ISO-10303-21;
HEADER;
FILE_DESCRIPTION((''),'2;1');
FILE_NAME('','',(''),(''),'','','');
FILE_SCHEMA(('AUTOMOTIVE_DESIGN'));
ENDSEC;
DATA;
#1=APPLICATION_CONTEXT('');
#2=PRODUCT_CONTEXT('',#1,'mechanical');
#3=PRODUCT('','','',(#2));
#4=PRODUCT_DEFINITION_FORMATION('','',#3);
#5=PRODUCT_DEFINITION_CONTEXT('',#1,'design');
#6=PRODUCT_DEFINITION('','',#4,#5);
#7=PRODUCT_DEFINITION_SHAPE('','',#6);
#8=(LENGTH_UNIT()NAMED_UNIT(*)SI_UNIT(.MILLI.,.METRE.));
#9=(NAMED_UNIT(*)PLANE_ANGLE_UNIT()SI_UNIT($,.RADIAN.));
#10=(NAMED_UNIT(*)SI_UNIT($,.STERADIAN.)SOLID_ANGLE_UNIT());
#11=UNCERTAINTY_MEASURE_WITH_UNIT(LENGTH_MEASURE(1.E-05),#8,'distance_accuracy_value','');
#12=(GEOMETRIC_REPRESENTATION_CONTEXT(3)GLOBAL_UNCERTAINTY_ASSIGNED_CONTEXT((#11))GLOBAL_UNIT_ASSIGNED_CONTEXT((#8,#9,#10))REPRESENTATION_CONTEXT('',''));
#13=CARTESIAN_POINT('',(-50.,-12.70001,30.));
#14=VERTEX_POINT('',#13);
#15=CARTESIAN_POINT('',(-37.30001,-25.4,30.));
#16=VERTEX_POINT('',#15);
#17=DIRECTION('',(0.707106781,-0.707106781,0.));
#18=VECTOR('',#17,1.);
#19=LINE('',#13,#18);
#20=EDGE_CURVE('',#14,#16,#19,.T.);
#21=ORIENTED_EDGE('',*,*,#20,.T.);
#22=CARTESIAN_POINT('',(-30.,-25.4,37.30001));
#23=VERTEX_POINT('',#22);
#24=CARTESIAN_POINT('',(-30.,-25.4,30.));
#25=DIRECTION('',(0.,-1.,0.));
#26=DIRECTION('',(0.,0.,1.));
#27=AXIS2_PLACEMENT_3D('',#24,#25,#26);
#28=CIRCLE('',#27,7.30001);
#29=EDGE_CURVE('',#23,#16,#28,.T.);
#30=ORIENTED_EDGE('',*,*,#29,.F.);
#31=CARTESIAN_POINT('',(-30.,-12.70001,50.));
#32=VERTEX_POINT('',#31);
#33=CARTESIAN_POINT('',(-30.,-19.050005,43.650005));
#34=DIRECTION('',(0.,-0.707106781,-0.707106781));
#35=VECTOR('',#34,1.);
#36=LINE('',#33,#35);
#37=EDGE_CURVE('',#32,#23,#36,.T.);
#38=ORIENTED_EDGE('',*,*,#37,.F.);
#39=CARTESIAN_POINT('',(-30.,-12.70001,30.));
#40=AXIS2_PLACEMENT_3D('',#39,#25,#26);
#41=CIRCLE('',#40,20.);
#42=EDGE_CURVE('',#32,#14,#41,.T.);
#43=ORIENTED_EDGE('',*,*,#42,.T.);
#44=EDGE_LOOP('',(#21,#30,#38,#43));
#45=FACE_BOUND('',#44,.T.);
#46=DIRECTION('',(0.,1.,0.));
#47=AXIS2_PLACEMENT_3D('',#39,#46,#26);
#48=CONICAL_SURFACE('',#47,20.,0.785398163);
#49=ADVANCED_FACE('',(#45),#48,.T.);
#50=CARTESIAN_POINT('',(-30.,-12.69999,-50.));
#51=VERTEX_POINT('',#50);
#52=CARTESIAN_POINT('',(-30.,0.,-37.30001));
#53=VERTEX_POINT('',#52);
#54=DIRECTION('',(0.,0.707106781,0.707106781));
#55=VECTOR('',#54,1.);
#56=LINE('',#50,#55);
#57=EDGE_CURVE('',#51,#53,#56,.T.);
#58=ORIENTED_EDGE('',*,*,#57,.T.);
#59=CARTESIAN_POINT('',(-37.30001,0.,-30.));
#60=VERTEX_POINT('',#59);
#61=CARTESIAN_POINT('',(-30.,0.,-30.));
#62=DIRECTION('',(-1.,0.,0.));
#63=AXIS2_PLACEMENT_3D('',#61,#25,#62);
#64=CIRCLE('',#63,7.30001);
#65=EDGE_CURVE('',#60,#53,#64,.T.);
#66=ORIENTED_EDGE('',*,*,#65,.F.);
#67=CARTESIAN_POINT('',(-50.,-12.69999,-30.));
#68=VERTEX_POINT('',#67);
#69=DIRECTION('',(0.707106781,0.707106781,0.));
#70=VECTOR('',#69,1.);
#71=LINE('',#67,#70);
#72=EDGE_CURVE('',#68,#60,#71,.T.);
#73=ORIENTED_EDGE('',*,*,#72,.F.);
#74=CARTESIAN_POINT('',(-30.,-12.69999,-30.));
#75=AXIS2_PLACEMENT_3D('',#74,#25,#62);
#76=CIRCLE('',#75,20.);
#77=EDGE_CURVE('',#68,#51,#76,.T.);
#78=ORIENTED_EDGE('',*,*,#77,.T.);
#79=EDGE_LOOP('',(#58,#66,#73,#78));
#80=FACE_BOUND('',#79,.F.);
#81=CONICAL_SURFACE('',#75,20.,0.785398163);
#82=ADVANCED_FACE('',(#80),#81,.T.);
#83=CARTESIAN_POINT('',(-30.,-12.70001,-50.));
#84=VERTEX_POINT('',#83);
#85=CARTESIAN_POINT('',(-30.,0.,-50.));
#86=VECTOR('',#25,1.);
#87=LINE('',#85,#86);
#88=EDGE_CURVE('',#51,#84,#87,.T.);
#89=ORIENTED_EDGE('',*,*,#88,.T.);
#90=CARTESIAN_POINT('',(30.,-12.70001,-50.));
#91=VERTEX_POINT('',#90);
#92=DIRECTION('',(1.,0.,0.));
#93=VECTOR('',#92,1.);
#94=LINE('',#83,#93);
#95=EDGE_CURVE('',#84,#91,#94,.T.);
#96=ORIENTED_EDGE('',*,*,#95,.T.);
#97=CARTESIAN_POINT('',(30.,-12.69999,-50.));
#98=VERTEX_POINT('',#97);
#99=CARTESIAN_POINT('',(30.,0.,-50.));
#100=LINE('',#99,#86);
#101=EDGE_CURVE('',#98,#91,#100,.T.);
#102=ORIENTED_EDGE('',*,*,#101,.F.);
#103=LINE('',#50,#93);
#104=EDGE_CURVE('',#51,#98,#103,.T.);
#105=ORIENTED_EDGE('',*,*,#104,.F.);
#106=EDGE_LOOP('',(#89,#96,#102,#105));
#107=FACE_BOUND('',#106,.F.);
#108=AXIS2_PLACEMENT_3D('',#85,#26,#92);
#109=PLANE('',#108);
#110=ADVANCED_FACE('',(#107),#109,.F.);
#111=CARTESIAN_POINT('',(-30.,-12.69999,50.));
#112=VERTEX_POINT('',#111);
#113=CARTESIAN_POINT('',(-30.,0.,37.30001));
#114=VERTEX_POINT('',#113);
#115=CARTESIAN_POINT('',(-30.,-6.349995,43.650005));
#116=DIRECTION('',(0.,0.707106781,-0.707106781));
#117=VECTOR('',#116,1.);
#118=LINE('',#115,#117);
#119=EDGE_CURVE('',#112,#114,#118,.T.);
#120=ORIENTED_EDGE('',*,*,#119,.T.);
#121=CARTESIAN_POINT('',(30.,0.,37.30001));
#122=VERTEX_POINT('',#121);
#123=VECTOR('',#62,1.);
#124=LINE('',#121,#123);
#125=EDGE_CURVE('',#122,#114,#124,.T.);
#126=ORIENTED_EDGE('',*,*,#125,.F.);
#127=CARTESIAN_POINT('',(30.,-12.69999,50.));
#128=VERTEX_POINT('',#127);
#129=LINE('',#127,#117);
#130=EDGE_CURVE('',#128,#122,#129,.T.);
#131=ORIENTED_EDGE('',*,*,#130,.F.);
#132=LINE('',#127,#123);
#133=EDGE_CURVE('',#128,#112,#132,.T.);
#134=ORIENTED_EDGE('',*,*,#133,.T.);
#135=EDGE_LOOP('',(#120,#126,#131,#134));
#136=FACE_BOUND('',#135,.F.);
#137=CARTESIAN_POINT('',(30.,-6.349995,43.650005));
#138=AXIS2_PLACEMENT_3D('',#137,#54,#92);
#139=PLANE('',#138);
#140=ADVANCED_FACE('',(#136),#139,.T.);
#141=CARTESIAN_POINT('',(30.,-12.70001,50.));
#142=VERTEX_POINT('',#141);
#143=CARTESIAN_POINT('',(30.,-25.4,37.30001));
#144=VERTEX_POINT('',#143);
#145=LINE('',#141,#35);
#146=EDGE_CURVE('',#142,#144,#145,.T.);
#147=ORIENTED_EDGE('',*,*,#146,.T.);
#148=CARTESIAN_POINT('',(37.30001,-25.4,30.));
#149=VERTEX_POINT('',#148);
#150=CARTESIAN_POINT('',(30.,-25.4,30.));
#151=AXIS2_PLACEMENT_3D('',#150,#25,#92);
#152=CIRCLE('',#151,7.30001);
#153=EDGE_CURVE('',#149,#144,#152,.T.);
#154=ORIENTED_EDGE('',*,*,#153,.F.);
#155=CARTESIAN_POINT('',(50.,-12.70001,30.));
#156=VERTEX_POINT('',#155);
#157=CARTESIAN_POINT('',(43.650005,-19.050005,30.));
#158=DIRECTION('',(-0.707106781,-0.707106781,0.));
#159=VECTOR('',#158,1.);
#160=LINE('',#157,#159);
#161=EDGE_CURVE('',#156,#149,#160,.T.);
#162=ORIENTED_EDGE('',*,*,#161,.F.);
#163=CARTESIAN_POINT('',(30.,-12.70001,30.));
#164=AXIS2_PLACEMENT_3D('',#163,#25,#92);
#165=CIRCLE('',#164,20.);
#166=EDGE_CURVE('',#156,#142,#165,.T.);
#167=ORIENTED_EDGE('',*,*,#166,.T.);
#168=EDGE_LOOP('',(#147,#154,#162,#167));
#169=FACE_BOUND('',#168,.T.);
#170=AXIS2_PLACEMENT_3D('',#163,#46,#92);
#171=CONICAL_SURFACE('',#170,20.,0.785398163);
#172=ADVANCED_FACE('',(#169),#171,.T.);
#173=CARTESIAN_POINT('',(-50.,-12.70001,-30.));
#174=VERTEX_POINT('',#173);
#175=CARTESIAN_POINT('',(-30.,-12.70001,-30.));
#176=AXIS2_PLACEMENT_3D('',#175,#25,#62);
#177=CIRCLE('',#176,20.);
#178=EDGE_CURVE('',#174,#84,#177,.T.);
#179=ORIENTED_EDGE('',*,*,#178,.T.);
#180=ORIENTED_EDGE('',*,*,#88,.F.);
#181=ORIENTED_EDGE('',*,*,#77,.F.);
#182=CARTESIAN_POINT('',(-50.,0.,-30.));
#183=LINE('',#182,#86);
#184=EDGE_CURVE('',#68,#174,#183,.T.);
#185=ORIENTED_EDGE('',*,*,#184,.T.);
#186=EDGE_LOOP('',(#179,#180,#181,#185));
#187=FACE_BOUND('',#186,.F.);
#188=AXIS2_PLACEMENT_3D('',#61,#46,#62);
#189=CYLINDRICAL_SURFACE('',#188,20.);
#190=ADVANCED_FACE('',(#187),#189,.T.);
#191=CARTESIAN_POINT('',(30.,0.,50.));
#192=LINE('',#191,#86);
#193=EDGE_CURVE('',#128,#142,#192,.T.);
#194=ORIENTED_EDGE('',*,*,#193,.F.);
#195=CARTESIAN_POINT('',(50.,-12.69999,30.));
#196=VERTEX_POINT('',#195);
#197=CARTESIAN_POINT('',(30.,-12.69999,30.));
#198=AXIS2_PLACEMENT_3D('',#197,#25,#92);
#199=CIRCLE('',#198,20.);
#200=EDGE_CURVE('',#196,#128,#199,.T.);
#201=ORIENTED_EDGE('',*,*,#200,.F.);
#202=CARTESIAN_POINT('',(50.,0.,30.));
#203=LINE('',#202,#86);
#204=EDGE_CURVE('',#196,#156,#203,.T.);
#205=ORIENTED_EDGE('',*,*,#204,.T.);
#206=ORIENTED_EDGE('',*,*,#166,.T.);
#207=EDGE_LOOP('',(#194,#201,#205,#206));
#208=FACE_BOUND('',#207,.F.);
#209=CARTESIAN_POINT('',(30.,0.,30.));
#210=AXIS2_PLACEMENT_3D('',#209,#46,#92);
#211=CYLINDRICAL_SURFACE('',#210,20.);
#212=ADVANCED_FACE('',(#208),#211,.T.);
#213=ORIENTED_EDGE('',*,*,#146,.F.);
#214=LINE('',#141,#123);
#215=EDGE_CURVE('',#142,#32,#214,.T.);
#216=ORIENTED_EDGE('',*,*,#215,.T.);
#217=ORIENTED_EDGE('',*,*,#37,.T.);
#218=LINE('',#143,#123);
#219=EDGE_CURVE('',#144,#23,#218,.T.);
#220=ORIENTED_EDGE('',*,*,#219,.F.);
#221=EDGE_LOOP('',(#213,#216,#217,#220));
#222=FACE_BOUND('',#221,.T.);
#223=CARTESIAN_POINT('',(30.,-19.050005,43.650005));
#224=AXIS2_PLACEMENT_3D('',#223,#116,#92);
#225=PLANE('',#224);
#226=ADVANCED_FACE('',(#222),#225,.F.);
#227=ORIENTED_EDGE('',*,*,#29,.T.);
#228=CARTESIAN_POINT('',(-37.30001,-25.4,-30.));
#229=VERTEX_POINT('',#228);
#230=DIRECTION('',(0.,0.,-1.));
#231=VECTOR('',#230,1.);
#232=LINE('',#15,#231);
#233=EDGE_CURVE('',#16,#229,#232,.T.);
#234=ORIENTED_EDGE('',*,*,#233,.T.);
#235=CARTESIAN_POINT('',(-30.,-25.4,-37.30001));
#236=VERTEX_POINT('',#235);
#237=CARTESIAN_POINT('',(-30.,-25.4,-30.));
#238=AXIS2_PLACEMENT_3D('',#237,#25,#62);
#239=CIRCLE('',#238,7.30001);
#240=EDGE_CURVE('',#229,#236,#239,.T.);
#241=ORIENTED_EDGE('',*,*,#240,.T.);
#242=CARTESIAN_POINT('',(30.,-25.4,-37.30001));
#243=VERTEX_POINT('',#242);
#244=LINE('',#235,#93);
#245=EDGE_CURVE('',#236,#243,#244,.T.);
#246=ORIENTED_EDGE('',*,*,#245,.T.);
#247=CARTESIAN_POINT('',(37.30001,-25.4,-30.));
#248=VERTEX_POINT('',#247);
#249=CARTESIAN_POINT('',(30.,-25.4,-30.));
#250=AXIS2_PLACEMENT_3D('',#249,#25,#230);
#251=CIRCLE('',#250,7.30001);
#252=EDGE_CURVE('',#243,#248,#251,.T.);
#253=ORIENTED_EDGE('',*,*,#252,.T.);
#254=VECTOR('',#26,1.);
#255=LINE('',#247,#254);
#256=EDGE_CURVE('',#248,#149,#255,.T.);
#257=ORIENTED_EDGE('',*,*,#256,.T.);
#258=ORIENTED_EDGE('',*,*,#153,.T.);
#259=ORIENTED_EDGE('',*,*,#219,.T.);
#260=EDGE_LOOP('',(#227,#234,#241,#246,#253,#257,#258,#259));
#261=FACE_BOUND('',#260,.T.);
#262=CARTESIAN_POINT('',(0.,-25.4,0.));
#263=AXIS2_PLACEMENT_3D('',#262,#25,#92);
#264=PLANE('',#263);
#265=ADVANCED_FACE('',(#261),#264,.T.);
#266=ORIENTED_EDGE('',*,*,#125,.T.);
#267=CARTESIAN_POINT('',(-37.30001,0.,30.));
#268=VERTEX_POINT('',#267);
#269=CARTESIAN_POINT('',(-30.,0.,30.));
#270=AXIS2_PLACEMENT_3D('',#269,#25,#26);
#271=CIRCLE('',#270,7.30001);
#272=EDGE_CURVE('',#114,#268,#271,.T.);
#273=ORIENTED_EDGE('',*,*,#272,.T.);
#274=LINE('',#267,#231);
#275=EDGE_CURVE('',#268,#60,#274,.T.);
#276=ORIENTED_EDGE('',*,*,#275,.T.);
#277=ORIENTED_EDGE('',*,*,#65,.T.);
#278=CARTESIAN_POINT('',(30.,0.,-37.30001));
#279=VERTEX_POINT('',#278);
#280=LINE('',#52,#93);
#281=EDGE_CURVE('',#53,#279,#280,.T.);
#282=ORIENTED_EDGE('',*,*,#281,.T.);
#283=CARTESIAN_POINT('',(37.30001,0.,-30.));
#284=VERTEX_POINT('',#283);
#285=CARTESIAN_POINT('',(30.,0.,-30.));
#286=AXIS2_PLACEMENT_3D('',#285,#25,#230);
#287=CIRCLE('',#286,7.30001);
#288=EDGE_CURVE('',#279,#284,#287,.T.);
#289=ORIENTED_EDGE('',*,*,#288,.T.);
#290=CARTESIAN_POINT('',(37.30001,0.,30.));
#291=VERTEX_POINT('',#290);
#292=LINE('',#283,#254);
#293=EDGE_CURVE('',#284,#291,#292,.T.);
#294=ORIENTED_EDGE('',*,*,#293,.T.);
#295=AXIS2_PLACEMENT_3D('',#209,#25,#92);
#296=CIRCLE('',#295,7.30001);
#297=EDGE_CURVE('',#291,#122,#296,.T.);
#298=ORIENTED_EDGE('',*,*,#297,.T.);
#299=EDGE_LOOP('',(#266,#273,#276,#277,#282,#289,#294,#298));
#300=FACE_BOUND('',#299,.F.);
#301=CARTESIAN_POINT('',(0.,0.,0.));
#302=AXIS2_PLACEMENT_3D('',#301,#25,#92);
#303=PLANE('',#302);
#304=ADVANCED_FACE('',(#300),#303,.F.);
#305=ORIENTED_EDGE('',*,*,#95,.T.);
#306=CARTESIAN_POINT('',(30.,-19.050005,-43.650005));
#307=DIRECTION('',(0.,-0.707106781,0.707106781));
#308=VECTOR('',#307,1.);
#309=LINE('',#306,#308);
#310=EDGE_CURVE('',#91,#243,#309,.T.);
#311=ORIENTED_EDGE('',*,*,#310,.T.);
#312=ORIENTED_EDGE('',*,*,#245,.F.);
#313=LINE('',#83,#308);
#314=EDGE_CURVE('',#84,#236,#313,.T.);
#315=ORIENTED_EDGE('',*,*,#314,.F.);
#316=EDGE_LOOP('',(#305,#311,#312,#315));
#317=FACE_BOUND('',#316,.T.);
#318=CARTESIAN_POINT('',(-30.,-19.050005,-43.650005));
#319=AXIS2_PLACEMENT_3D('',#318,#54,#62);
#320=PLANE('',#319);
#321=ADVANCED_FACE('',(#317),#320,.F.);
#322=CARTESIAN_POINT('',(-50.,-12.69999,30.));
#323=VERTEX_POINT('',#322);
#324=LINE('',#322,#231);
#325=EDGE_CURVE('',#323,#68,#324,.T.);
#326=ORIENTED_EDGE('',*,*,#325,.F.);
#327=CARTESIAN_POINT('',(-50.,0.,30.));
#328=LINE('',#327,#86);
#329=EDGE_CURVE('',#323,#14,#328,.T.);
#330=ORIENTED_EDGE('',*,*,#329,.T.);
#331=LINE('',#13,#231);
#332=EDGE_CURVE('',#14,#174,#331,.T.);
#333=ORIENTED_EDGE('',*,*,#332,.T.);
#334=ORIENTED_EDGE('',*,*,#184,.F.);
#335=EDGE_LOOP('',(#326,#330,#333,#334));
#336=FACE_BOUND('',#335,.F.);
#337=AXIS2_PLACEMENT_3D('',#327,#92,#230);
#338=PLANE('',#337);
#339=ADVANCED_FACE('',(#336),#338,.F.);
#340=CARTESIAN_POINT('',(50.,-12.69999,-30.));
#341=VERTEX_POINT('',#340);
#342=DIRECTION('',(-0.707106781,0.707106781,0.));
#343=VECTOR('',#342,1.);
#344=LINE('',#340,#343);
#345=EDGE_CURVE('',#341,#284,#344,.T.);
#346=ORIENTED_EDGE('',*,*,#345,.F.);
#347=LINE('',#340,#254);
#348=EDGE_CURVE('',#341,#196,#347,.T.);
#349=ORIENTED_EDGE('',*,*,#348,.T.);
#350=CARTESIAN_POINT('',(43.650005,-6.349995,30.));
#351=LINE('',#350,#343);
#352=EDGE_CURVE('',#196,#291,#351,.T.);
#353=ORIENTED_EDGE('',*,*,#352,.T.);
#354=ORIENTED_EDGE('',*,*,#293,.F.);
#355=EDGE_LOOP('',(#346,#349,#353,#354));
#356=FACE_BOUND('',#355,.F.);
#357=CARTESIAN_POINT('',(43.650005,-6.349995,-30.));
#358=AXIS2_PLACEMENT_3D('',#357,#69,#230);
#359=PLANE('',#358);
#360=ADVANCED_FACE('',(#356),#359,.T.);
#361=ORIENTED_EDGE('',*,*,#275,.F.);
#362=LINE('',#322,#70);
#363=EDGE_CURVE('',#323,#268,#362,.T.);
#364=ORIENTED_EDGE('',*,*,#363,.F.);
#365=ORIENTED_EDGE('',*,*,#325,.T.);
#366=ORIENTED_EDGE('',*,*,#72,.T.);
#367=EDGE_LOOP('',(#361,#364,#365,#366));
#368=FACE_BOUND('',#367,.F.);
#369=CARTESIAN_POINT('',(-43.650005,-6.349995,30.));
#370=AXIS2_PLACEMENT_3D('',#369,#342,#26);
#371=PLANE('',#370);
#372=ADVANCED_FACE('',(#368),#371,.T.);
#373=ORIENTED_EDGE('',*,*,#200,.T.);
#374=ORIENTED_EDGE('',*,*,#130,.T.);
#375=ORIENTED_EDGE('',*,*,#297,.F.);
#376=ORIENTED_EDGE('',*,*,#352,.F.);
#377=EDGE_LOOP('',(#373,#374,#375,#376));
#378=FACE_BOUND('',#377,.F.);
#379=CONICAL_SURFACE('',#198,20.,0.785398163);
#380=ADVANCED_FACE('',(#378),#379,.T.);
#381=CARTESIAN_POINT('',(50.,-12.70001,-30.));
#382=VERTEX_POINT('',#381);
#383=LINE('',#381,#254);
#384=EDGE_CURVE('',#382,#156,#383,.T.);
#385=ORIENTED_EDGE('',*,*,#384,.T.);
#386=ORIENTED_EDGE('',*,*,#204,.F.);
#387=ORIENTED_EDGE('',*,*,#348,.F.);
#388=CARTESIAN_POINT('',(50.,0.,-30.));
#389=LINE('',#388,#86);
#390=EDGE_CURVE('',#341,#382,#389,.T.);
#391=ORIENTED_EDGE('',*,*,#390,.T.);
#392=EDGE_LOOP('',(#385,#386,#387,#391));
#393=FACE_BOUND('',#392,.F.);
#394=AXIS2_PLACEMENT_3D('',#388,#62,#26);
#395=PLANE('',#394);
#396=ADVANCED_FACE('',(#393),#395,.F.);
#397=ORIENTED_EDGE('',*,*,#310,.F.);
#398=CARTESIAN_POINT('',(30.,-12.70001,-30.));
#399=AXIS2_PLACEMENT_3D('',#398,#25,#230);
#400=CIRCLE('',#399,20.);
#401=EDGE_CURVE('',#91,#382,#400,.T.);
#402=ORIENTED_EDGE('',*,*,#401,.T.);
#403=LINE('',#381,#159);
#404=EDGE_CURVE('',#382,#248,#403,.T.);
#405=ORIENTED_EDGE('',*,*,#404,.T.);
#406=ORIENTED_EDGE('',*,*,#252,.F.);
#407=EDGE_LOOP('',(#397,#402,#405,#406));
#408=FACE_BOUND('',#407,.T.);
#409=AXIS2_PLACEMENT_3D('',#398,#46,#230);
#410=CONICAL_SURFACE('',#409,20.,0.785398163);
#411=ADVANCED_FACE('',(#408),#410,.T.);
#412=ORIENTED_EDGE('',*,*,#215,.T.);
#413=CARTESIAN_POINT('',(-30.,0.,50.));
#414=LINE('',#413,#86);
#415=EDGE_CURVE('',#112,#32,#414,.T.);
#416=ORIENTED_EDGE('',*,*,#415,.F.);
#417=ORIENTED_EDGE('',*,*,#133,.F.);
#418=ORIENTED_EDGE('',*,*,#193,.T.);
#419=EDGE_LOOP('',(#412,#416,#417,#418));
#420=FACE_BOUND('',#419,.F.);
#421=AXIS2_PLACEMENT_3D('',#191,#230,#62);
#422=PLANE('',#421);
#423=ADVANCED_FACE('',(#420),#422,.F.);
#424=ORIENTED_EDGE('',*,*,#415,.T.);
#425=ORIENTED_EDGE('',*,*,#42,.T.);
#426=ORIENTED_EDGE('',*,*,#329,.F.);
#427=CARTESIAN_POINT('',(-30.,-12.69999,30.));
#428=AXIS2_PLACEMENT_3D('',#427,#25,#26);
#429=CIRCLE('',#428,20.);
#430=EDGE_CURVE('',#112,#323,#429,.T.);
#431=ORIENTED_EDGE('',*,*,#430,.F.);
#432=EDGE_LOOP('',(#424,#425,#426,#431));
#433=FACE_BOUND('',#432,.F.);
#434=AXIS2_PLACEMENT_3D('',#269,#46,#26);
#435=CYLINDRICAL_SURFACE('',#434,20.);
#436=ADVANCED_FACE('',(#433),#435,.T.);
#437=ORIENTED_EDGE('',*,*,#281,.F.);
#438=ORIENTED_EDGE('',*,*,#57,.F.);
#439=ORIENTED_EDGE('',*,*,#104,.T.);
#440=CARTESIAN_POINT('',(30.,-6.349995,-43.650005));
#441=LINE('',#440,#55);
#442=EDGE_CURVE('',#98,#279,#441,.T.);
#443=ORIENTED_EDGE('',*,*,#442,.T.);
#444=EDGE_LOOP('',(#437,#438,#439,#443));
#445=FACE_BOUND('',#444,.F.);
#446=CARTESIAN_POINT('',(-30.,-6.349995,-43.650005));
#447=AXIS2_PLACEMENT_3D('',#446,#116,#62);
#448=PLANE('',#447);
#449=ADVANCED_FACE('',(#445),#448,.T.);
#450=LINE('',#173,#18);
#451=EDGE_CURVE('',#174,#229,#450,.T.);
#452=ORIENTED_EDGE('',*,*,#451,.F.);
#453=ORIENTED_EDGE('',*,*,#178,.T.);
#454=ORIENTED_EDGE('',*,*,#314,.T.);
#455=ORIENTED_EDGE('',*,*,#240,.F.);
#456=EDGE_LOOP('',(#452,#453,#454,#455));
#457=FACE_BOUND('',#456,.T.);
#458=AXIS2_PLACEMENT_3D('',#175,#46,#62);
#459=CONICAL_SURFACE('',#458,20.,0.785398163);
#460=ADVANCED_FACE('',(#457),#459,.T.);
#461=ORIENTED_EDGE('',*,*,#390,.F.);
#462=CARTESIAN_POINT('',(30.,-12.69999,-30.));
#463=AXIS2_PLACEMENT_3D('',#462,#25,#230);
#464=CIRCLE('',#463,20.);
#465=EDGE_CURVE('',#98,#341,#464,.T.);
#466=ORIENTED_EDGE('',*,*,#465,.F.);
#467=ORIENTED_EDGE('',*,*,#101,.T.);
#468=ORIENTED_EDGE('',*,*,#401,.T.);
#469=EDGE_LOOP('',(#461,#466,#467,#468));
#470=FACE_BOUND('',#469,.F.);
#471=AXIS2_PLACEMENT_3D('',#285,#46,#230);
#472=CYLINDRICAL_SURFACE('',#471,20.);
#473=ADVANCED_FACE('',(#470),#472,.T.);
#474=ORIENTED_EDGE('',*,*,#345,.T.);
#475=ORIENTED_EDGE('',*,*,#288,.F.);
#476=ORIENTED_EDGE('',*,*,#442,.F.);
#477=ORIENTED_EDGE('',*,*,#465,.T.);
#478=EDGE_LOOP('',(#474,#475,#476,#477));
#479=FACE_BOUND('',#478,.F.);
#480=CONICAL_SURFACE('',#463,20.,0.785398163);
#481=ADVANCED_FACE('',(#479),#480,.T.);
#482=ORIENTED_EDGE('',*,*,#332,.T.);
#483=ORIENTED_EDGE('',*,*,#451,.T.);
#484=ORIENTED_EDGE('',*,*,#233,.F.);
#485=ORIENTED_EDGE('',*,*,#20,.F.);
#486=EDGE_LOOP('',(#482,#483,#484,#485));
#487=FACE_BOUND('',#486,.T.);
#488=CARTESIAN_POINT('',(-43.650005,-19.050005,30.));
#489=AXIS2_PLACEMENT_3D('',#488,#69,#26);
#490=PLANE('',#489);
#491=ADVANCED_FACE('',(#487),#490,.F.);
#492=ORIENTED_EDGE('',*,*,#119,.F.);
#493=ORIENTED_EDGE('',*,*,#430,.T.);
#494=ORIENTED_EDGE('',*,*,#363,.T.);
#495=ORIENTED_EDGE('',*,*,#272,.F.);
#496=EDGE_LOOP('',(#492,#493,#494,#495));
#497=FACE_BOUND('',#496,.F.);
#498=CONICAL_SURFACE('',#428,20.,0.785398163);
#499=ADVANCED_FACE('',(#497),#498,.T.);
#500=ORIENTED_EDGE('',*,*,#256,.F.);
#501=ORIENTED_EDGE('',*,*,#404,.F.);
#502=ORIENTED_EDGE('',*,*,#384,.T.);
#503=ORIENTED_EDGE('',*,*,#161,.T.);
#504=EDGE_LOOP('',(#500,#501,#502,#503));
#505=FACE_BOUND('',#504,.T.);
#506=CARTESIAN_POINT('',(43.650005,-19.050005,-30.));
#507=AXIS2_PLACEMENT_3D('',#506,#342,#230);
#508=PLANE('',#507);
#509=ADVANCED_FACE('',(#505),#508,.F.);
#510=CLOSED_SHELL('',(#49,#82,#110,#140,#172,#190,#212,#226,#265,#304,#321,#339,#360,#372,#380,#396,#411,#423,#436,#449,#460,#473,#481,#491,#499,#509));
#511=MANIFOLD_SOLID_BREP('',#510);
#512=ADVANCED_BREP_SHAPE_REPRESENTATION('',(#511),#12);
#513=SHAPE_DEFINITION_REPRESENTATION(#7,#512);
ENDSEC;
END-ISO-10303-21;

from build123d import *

# Parameters (mm, degrees)
F1_DEPTH = 25.4
F2_SIZE  = 12.69999


# Not quite as in the source:
# - a fillet or chamfer is up to 0.001 mm smaller than in the source, because OpenCascade refuses the exact size


with BuildPart() as f1:
    # F0 (on Front) → F1 (new body)
    with BuildSketch(Plane.XZ):
        with BuildLine():
            Line((-30, -50), (30, -50))
            ThreePointArc((30, -50), (44.1421356237, -44.1421356237), (50, -30))
            Line((50, -30), (50, 30))
            ThreePointArc((50, 30), (44.1421356237, 44.1421356237), (30, 50))
            Line((30, 50), (-30, 50))
            ThreePointArc((-30, 50), (-44.1421356237, 44.1421356237), (-50, 30))
            Line((-50, 30), (-50, -30))
            ThreePointArc((-50, -30), (-44.1421356237, -44.1421356237), (-30, -50))
        make_face()
    extrude(amount=F1_DEPTH)

    # F2 (size 12.7 in the source; OpenCascade refuses exactly that, so slightly less here)
    f2_edges = [f1.edges().sort_by_distance(p)[0] for p in [
        (-44.142136, -25.4, -44.142136),
        (0, -25.4, -50),
        (44.142136, -25.4, -44.142136),
        (50, -25.4, 0),
        (44.142136, -25.4, 44.142136),
        (0, -25.4, 50),
        (-44.142136, -25.4, 44.142136),
        (-50, -25.4, 0),
        (-44.142136, 0, -44.142136),
        (0, 0, -50),
        (44.142136, 0, -44.142136),
        (50, 0, 0),
        (44.142136, 0, 44.142136),
        (0, 0, 50),
        (-44.142136, 0, 44.142136),
        (-50, 0, 0),
    ]]
    chamfer(f2_edges, length=F2_SIZE)


solid = f1.part
